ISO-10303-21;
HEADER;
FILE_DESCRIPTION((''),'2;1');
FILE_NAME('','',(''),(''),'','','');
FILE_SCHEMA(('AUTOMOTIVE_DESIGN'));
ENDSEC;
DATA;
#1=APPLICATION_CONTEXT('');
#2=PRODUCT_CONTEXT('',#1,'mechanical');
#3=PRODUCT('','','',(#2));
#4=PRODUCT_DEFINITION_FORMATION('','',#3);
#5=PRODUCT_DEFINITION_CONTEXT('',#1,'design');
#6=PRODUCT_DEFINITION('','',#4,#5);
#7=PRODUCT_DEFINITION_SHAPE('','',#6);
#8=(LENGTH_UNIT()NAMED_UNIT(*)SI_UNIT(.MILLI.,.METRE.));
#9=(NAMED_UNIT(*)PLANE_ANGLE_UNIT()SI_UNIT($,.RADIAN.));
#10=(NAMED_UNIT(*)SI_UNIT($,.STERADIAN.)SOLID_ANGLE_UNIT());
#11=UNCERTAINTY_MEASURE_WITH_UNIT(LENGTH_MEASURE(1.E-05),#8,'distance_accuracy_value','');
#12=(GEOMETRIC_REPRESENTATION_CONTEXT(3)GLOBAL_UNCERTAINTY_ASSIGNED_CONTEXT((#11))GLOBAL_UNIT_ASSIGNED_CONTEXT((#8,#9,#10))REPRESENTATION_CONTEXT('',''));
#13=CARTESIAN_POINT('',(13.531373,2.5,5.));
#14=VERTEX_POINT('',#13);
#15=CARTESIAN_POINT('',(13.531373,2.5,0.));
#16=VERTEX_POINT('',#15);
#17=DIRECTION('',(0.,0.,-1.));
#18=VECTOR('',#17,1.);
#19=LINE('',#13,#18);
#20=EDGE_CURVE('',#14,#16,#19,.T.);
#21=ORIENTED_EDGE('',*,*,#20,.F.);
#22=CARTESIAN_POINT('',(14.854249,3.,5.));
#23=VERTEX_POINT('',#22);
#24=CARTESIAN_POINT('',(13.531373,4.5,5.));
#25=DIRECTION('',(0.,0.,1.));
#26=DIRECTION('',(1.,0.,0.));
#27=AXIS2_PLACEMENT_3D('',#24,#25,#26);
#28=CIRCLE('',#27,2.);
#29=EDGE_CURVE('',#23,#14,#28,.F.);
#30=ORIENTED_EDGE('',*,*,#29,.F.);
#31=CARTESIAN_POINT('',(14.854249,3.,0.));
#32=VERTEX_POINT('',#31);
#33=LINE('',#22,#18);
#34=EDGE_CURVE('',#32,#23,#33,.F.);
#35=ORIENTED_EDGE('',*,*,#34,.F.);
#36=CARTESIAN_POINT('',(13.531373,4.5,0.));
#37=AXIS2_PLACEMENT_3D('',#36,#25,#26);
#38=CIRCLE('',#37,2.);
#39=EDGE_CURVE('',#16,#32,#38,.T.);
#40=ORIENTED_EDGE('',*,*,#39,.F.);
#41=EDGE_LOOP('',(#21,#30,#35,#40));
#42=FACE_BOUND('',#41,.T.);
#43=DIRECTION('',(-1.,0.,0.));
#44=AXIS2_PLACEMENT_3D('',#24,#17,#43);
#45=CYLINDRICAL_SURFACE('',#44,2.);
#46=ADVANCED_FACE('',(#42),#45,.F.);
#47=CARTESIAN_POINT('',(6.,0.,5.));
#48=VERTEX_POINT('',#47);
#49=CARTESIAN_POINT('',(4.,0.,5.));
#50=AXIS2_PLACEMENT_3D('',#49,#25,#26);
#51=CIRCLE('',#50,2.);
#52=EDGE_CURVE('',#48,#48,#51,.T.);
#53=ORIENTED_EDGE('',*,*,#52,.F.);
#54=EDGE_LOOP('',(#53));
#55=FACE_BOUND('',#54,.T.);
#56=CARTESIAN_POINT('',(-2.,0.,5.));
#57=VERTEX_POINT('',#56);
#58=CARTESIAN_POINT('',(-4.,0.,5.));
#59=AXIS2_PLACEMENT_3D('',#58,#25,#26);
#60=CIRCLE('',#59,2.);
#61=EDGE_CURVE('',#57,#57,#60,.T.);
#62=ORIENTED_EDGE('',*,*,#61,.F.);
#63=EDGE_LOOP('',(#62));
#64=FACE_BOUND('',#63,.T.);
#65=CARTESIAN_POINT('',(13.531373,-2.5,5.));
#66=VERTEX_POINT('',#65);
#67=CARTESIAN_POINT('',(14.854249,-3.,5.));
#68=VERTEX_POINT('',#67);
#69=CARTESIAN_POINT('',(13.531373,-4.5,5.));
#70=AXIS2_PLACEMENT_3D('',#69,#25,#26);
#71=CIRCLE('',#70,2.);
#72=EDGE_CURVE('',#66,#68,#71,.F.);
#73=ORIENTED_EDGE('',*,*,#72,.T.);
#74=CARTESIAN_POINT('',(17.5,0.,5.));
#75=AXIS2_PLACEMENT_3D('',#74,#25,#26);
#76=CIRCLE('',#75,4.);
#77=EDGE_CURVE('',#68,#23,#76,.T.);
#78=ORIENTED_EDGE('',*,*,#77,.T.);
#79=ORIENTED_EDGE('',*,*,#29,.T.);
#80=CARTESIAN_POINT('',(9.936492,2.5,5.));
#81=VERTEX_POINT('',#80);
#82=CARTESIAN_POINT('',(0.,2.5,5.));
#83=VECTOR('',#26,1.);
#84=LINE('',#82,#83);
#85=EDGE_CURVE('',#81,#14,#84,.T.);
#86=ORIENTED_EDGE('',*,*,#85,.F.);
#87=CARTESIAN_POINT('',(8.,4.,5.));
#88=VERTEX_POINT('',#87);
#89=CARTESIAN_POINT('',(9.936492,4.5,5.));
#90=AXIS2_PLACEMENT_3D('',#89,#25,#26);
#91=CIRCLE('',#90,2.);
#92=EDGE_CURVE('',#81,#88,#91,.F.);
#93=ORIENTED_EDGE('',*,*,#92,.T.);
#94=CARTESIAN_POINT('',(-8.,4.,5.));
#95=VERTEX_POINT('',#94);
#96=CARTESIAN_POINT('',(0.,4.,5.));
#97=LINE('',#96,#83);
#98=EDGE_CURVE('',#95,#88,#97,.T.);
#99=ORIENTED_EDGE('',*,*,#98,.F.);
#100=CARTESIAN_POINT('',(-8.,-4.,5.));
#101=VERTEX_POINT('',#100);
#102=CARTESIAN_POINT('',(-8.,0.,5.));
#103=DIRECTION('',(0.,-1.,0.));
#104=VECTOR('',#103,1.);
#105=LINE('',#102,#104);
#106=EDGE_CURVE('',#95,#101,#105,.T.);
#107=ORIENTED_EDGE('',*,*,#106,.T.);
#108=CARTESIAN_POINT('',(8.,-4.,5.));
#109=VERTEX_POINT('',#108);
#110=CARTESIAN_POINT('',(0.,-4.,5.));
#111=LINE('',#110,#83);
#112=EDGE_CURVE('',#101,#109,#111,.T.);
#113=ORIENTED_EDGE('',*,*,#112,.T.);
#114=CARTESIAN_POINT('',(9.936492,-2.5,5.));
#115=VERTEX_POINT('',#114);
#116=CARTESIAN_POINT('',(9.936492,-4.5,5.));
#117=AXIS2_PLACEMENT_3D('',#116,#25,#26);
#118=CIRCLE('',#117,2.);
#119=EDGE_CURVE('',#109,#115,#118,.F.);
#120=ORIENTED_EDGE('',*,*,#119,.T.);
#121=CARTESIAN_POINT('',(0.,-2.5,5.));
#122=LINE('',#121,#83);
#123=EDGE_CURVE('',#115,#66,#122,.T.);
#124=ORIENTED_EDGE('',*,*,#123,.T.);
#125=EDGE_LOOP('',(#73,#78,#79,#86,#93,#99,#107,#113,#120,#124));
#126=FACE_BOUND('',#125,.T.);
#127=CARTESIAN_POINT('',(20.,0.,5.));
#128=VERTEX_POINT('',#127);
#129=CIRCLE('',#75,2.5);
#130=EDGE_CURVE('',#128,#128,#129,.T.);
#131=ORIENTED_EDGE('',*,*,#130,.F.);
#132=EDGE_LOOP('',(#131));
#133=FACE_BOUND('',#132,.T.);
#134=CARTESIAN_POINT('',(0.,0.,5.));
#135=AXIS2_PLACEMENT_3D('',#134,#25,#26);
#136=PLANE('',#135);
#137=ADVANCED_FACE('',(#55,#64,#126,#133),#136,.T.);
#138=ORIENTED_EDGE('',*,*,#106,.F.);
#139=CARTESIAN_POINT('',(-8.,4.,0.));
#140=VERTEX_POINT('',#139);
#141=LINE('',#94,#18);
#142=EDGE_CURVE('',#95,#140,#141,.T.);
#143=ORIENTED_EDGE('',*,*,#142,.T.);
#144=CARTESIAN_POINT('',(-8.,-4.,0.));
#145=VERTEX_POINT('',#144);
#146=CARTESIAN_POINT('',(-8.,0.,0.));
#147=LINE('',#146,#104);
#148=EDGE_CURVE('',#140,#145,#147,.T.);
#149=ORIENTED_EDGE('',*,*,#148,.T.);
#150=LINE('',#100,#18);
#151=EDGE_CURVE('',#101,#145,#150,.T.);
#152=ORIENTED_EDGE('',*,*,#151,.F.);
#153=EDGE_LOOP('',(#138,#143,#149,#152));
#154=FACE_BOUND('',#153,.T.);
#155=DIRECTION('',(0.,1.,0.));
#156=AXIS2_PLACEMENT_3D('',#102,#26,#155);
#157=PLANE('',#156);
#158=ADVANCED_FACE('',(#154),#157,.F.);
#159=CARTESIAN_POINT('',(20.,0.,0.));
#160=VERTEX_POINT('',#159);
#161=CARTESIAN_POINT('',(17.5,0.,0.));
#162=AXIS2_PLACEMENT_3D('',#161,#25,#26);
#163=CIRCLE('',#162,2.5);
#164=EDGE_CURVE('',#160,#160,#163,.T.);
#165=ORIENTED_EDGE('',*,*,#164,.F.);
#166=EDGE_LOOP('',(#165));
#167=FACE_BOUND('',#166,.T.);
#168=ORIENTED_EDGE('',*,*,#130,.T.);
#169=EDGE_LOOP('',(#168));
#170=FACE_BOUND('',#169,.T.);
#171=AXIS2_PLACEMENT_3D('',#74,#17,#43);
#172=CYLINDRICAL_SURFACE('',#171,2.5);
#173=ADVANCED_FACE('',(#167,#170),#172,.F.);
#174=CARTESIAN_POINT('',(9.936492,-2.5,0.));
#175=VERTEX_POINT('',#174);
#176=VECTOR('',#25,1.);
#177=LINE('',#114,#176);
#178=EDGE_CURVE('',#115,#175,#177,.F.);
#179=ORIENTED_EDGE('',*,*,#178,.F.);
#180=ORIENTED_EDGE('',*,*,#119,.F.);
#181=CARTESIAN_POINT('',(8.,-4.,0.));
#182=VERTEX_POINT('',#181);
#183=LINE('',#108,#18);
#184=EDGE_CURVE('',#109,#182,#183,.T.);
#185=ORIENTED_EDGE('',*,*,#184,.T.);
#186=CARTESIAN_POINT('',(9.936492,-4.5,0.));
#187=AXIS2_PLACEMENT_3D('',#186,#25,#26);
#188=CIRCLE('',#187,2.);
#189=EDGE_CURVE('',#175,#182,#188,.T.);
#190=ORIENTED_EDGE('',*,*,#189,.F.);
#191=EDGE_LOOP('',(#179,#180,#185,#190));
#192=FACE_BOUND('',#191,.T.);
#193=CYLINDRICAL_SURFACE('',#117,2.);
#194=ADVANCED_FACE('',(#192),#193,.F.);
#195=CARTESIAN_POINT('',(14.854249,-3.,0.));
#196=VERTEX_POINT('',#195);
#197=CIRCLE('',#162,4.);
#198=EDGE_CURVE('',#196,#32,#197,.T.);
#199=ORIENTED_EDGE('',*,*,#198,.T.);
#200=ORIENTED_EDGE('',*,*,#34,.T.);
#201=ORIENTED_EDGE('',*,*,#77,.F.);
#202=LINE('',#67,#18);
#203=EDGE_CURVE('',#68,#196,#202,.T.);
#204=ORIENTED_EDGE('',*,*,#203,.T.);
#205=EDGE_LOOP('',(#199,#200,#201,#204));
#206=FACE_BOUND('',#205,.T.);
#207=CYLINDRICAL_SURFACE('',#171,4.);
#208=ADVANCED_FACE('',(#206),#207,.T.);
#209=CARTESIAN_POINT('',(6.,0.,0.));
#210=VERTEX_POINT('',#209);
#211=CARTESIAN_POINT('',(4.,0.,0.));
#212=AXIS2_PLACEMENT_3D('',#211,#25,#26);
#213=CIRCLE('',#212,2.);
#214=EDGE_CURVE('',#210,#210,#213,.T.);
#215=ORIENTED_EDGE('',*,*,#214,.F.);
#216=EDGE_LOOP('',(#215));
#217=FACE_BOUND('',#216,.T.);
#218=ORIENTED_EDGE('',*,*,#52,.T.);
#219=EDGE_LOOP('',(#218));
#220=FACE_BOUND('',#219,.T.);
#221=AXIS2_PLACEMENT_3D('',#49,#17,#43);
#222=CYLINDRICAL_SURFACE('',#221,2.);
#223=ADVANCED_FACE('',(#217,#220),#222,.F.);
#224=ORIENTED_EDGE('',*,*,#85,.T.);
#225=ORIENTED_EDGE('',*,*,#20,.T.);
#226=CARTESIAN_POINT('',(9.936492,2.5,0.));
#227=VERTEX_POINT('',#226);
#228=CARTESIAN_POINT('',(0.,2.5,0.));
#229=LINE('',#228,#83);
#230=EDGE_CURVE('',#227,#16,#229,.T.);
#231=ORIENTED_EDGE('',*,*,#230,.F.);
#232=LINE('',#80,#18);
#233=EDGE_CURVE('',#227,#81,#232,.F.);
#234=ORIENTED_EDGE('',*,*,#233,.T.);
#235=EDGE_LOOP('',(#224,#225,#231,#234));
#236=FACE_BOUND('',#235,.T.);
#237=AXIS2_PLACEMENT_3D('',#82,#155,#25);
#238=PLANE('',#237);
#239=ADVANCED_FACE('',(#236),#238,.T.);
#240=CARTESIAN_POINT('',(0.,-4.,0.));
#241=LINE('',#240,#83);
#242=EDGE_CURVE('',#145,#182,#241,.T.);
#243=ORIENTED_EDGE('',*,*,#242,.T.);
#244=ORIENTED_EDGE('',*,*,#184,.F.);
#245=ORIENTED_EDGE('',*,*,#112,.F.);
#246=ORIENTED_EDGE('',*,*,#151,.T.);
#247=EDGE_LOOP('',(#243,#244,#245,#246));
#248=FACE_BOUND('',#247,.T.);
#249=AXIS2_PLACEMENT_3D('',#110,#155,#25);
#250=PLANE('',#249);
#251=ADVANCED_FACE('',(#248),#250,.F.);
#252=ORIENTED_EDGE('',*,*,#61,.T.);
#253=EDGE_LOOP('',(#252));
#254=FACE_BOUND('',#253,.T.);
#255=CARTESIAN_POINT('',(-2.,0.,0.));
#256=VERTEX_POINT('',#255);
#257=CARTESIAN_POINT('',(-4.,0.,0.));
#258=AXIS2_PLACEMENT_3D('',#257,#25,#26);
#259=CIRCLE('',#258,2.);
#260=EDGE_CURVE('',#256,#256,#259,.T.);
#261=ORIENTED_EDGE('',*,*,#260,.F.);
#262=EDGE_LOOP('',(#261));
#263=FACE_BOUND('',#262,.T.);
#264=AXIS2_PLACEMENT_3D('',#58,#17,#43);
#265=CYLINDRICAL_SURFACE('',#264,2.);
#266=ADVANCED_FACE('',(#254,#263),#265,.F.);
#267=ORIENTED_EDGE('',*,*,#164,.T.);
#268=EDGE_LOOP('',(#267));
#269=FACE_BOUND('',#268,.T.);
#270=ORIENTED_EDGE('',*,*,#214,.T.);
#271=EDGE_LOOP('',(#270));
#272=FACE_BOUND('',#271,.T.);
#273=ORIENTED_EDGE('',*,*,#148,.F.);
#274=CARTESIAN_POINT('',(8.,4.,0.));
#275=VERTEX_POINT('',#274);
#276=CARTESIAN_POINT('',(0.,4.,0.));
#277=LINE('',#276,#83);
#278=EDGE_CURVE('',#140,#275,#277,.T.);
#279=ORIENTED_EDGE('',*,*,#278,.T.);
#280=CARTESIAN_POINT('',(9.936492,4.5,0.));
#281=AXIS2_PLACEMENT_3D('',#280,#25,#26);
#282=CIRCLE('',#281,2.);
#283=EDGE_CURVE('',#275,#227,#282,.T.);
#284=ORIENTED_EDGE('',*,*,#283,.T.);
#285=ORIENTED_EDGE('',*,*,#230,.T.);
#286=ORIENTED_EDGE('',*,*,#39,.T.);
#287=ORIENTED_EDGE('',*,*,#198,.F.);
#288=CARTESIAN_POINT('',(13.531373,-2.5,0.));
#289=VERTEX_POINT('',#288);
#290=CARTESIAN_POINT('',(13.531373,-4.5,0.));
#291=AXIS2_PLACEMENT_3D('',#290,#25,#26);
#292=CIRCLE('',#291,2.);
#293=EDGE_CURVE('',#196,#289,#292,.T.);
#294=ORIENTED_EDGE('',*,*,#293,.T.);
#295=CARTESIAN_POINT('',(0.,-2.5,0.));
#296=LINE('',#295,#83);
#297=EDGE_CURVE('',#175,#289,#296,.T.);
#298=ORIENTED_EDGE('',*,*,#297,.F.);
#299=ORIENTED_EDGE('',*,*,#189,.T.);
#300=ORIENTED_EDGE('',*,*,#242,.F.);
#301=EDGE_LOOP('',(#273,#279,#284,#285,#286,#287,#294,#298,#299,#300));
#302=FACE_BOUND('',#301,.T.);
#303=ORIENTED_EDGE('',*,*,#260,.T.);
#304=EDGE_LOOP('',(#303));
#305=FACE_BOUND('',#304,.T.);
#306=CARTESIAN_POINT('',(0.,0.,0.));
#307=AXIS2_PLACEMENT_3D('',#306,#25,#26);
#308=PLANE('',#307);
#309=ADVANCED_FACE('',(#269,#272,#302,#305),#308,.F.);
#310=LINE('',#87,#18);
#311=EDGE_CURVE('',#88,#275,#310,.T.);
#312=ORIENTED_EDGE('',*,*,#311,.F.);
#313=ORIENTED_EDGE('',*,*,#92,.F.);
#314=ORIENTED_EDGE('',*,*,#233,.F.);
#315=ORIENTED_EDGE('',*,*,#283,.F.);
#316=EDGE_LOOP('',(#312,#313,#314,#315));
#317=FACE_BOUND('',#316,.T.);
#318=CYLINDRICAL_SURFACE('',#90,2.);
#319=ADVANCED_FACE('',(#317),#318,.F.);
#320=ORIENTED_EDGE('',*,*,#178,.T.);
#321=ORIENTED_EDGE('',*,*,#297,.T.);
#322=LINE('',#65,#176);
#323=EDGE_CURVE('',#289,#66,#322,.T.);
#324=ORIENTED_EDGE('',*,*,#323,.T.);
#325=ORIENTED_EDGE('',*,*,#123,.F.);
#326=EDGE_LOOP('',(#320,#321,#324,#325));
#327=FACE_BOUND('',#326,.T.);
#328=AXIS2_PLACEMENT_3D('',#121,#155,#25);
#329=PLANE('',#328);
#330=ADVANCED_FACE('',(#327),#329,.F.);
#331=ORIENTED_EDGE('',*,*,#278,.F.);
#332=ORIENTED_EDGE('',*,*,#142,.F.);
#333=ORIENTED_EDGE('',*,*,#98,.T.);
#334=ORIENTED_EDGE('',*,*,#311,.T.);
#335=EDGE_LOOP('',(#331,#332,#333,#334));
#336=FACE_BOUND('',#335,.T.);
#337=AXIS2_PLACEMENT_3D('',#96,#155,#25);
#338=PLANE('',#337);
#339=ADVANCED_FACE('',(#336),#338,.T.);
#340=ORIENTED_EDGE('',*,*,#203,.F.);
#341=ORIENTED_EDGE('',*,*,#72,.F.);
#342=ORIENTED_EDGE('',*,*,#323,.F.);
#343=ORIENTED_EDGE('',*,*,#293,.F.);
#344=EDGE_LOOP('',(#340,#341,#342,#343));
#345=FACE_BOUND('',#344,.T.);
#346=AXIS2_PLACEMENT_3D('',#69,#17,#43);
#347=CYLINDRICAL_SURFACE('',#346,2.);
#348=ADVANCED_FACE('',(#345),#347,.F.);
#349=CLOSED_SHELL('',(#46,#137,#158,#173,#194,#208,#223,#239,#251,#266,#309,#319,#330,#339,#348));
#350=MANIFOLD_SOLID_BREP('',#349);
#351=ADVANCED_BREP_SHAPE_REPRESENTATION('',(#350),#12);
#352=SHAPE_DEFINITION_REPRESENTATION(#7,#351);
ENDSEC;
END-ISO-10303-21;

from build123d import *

# Parameters (mm, degrees)
SKETCH1_R           = 2
BOSS_EXTRUDE1_DEPTH = 5
FILLET1_R           = 2


with BuildPart() as part:
    # Sketch1 → Boss-Extrude1 (new body)
    with BuildSketch(Plane.XY):
        with BuildLine():
            Line((8, 4), (-8, 4))
            Line((-8, 4), (-8, -4))
            Line((-8, -4), (8, -4))
            Line((8, -4), (8, -2.5))
            Line((8, -2.5), (14.377501001, -2.5))
            ThreePointArc((14.377501001, -2.5), (21.5, 0), (14.377501001, 2.5))
            Line((14.377501001, 2.5), (8, 2.5))
            Line((8, 2.5), (8, 4))
        make_face()
        with Locations((-4, 0)):
            Circle(SKETCH1_R, mode=Mode.SUBTRACT)
        with Locations((4, 0)):
            Circle(SKETCH1_R, mode=Mode.SUBTRACT)
        with BuildLine():
            ThreePointArc((20, 0), (17.5, -2.5), (15, 0))
            ThreePointArc((15, 0), (17.5, 2.5), (20, 0))
        make_face(mode=Mode.SUBTRACT)
    extrude(amount=BOSS_EXTRUDE1_DEPTH)

    # Fillet1
    # the kernel refuses this fillet: 2 mm, written as the material it adds along each edge
    with BuildSketch(Plane(origin=(14.377501001, -2.5, 0), x_dir=(0.6900779887780536, -0.7237350132500407, 0), z_dir=(0, 0, 1))) as fillet1_piece_1:
        with BuildLine():
            CenterArc((0.863575741, -1.992528413), FILLET1_R, 94.954095219, 41.409622109)
            Line((-0.583894286, -0.612372436), (-0.612843687, -0.584769316))
            Line((-0.612843687, -0.584769316), (-0.028949401, 0.02760312))
            Line((-0.028949401, 0.02760312), (0.003454303, 0.039850568))
            ThreePointArc((0.003454303, 0.039850568), (0.345430296, 0.025056827), (0.687406289, 0.039850568))
            Line((0.687406289, 0.039850568), (0.690860592, 0))
        make_face()
    extrude(amount=5)
    with BuildSketch(Plane(origin=(8, -2.5, 0), x_dir=(1, 0, 0), z_dir=(0, 0, 1))) as fillet1_piece_2:
        with BuildLine():
            CenterArc((1.936491673, -2), FILLET1_R, 90, 75.522487814)
            Line((0, -1.5), (-0.038729833, -1.49))
            ThreePointArc((-0.038729833, -1.49), (-0.04, -0.75), (-0.04, 0))
            Line((-0.04, 0), (0, 0.04))
            Line((0, 0.04), (1.936491673, 0.04))
            Line((1.936491673, 0.04), (1.936491673, 0))
        make_face()
    extrude(amount=5)
    with BuildSketch(Plane(origin=(14.377501001, 2.5, 0), x_dir=(0.6900779887780526, 0.7237350132500416, 0), z_dir=(0, 0, 1))) as fillet1_piece_3:
        with BuildLine():
            CenterArc((0.863575741, 1.992528413), FILLET1_R, 223.636282672, 41.409622109)
            Line((-0.583894286, 0.612372436), (-0.612843687, 0.584769316))
            Line((-0.612843687, 0.584769316), (-0.028949401, -0.02760312))
            Line((-0.028949401, -0.02760312), (0.003454303, -0.039850568))
            ThreePointArc((0.003454303, -0.039850568), (0.345430296, -0.025056827), (0.687406289, -0.039850568))
            Line((0.687406289, -0.039850568), (0.690860592, 0))
        make_face()
    extrude(amount=5)
    with BuildSketch(Plane(origin=(8, 2.5, 0), x_dir=(0, 1, 0), z_dir=(0, 0, 1))) as fillet1_piece_4:
        with BuildLine():
            CenterArc((2, -1.936491673), FILLET1_R, 104.477512186, 75.522487814)
            Line((0, -1.936491673), (-0.04, -1.936491673))
            Line((-0.04, -1.936491673), (-0.04, 0))
            Line((-0.04, 0), (0, 0.04))
            ThreePointArc((0, 0.04), (0.75, 0.04), (1.49, 0.038729833))
            Line((1.49, 0.038729833), (1.5, 0))
        make_face()
    extrude(amount=5)


solid = part.part
